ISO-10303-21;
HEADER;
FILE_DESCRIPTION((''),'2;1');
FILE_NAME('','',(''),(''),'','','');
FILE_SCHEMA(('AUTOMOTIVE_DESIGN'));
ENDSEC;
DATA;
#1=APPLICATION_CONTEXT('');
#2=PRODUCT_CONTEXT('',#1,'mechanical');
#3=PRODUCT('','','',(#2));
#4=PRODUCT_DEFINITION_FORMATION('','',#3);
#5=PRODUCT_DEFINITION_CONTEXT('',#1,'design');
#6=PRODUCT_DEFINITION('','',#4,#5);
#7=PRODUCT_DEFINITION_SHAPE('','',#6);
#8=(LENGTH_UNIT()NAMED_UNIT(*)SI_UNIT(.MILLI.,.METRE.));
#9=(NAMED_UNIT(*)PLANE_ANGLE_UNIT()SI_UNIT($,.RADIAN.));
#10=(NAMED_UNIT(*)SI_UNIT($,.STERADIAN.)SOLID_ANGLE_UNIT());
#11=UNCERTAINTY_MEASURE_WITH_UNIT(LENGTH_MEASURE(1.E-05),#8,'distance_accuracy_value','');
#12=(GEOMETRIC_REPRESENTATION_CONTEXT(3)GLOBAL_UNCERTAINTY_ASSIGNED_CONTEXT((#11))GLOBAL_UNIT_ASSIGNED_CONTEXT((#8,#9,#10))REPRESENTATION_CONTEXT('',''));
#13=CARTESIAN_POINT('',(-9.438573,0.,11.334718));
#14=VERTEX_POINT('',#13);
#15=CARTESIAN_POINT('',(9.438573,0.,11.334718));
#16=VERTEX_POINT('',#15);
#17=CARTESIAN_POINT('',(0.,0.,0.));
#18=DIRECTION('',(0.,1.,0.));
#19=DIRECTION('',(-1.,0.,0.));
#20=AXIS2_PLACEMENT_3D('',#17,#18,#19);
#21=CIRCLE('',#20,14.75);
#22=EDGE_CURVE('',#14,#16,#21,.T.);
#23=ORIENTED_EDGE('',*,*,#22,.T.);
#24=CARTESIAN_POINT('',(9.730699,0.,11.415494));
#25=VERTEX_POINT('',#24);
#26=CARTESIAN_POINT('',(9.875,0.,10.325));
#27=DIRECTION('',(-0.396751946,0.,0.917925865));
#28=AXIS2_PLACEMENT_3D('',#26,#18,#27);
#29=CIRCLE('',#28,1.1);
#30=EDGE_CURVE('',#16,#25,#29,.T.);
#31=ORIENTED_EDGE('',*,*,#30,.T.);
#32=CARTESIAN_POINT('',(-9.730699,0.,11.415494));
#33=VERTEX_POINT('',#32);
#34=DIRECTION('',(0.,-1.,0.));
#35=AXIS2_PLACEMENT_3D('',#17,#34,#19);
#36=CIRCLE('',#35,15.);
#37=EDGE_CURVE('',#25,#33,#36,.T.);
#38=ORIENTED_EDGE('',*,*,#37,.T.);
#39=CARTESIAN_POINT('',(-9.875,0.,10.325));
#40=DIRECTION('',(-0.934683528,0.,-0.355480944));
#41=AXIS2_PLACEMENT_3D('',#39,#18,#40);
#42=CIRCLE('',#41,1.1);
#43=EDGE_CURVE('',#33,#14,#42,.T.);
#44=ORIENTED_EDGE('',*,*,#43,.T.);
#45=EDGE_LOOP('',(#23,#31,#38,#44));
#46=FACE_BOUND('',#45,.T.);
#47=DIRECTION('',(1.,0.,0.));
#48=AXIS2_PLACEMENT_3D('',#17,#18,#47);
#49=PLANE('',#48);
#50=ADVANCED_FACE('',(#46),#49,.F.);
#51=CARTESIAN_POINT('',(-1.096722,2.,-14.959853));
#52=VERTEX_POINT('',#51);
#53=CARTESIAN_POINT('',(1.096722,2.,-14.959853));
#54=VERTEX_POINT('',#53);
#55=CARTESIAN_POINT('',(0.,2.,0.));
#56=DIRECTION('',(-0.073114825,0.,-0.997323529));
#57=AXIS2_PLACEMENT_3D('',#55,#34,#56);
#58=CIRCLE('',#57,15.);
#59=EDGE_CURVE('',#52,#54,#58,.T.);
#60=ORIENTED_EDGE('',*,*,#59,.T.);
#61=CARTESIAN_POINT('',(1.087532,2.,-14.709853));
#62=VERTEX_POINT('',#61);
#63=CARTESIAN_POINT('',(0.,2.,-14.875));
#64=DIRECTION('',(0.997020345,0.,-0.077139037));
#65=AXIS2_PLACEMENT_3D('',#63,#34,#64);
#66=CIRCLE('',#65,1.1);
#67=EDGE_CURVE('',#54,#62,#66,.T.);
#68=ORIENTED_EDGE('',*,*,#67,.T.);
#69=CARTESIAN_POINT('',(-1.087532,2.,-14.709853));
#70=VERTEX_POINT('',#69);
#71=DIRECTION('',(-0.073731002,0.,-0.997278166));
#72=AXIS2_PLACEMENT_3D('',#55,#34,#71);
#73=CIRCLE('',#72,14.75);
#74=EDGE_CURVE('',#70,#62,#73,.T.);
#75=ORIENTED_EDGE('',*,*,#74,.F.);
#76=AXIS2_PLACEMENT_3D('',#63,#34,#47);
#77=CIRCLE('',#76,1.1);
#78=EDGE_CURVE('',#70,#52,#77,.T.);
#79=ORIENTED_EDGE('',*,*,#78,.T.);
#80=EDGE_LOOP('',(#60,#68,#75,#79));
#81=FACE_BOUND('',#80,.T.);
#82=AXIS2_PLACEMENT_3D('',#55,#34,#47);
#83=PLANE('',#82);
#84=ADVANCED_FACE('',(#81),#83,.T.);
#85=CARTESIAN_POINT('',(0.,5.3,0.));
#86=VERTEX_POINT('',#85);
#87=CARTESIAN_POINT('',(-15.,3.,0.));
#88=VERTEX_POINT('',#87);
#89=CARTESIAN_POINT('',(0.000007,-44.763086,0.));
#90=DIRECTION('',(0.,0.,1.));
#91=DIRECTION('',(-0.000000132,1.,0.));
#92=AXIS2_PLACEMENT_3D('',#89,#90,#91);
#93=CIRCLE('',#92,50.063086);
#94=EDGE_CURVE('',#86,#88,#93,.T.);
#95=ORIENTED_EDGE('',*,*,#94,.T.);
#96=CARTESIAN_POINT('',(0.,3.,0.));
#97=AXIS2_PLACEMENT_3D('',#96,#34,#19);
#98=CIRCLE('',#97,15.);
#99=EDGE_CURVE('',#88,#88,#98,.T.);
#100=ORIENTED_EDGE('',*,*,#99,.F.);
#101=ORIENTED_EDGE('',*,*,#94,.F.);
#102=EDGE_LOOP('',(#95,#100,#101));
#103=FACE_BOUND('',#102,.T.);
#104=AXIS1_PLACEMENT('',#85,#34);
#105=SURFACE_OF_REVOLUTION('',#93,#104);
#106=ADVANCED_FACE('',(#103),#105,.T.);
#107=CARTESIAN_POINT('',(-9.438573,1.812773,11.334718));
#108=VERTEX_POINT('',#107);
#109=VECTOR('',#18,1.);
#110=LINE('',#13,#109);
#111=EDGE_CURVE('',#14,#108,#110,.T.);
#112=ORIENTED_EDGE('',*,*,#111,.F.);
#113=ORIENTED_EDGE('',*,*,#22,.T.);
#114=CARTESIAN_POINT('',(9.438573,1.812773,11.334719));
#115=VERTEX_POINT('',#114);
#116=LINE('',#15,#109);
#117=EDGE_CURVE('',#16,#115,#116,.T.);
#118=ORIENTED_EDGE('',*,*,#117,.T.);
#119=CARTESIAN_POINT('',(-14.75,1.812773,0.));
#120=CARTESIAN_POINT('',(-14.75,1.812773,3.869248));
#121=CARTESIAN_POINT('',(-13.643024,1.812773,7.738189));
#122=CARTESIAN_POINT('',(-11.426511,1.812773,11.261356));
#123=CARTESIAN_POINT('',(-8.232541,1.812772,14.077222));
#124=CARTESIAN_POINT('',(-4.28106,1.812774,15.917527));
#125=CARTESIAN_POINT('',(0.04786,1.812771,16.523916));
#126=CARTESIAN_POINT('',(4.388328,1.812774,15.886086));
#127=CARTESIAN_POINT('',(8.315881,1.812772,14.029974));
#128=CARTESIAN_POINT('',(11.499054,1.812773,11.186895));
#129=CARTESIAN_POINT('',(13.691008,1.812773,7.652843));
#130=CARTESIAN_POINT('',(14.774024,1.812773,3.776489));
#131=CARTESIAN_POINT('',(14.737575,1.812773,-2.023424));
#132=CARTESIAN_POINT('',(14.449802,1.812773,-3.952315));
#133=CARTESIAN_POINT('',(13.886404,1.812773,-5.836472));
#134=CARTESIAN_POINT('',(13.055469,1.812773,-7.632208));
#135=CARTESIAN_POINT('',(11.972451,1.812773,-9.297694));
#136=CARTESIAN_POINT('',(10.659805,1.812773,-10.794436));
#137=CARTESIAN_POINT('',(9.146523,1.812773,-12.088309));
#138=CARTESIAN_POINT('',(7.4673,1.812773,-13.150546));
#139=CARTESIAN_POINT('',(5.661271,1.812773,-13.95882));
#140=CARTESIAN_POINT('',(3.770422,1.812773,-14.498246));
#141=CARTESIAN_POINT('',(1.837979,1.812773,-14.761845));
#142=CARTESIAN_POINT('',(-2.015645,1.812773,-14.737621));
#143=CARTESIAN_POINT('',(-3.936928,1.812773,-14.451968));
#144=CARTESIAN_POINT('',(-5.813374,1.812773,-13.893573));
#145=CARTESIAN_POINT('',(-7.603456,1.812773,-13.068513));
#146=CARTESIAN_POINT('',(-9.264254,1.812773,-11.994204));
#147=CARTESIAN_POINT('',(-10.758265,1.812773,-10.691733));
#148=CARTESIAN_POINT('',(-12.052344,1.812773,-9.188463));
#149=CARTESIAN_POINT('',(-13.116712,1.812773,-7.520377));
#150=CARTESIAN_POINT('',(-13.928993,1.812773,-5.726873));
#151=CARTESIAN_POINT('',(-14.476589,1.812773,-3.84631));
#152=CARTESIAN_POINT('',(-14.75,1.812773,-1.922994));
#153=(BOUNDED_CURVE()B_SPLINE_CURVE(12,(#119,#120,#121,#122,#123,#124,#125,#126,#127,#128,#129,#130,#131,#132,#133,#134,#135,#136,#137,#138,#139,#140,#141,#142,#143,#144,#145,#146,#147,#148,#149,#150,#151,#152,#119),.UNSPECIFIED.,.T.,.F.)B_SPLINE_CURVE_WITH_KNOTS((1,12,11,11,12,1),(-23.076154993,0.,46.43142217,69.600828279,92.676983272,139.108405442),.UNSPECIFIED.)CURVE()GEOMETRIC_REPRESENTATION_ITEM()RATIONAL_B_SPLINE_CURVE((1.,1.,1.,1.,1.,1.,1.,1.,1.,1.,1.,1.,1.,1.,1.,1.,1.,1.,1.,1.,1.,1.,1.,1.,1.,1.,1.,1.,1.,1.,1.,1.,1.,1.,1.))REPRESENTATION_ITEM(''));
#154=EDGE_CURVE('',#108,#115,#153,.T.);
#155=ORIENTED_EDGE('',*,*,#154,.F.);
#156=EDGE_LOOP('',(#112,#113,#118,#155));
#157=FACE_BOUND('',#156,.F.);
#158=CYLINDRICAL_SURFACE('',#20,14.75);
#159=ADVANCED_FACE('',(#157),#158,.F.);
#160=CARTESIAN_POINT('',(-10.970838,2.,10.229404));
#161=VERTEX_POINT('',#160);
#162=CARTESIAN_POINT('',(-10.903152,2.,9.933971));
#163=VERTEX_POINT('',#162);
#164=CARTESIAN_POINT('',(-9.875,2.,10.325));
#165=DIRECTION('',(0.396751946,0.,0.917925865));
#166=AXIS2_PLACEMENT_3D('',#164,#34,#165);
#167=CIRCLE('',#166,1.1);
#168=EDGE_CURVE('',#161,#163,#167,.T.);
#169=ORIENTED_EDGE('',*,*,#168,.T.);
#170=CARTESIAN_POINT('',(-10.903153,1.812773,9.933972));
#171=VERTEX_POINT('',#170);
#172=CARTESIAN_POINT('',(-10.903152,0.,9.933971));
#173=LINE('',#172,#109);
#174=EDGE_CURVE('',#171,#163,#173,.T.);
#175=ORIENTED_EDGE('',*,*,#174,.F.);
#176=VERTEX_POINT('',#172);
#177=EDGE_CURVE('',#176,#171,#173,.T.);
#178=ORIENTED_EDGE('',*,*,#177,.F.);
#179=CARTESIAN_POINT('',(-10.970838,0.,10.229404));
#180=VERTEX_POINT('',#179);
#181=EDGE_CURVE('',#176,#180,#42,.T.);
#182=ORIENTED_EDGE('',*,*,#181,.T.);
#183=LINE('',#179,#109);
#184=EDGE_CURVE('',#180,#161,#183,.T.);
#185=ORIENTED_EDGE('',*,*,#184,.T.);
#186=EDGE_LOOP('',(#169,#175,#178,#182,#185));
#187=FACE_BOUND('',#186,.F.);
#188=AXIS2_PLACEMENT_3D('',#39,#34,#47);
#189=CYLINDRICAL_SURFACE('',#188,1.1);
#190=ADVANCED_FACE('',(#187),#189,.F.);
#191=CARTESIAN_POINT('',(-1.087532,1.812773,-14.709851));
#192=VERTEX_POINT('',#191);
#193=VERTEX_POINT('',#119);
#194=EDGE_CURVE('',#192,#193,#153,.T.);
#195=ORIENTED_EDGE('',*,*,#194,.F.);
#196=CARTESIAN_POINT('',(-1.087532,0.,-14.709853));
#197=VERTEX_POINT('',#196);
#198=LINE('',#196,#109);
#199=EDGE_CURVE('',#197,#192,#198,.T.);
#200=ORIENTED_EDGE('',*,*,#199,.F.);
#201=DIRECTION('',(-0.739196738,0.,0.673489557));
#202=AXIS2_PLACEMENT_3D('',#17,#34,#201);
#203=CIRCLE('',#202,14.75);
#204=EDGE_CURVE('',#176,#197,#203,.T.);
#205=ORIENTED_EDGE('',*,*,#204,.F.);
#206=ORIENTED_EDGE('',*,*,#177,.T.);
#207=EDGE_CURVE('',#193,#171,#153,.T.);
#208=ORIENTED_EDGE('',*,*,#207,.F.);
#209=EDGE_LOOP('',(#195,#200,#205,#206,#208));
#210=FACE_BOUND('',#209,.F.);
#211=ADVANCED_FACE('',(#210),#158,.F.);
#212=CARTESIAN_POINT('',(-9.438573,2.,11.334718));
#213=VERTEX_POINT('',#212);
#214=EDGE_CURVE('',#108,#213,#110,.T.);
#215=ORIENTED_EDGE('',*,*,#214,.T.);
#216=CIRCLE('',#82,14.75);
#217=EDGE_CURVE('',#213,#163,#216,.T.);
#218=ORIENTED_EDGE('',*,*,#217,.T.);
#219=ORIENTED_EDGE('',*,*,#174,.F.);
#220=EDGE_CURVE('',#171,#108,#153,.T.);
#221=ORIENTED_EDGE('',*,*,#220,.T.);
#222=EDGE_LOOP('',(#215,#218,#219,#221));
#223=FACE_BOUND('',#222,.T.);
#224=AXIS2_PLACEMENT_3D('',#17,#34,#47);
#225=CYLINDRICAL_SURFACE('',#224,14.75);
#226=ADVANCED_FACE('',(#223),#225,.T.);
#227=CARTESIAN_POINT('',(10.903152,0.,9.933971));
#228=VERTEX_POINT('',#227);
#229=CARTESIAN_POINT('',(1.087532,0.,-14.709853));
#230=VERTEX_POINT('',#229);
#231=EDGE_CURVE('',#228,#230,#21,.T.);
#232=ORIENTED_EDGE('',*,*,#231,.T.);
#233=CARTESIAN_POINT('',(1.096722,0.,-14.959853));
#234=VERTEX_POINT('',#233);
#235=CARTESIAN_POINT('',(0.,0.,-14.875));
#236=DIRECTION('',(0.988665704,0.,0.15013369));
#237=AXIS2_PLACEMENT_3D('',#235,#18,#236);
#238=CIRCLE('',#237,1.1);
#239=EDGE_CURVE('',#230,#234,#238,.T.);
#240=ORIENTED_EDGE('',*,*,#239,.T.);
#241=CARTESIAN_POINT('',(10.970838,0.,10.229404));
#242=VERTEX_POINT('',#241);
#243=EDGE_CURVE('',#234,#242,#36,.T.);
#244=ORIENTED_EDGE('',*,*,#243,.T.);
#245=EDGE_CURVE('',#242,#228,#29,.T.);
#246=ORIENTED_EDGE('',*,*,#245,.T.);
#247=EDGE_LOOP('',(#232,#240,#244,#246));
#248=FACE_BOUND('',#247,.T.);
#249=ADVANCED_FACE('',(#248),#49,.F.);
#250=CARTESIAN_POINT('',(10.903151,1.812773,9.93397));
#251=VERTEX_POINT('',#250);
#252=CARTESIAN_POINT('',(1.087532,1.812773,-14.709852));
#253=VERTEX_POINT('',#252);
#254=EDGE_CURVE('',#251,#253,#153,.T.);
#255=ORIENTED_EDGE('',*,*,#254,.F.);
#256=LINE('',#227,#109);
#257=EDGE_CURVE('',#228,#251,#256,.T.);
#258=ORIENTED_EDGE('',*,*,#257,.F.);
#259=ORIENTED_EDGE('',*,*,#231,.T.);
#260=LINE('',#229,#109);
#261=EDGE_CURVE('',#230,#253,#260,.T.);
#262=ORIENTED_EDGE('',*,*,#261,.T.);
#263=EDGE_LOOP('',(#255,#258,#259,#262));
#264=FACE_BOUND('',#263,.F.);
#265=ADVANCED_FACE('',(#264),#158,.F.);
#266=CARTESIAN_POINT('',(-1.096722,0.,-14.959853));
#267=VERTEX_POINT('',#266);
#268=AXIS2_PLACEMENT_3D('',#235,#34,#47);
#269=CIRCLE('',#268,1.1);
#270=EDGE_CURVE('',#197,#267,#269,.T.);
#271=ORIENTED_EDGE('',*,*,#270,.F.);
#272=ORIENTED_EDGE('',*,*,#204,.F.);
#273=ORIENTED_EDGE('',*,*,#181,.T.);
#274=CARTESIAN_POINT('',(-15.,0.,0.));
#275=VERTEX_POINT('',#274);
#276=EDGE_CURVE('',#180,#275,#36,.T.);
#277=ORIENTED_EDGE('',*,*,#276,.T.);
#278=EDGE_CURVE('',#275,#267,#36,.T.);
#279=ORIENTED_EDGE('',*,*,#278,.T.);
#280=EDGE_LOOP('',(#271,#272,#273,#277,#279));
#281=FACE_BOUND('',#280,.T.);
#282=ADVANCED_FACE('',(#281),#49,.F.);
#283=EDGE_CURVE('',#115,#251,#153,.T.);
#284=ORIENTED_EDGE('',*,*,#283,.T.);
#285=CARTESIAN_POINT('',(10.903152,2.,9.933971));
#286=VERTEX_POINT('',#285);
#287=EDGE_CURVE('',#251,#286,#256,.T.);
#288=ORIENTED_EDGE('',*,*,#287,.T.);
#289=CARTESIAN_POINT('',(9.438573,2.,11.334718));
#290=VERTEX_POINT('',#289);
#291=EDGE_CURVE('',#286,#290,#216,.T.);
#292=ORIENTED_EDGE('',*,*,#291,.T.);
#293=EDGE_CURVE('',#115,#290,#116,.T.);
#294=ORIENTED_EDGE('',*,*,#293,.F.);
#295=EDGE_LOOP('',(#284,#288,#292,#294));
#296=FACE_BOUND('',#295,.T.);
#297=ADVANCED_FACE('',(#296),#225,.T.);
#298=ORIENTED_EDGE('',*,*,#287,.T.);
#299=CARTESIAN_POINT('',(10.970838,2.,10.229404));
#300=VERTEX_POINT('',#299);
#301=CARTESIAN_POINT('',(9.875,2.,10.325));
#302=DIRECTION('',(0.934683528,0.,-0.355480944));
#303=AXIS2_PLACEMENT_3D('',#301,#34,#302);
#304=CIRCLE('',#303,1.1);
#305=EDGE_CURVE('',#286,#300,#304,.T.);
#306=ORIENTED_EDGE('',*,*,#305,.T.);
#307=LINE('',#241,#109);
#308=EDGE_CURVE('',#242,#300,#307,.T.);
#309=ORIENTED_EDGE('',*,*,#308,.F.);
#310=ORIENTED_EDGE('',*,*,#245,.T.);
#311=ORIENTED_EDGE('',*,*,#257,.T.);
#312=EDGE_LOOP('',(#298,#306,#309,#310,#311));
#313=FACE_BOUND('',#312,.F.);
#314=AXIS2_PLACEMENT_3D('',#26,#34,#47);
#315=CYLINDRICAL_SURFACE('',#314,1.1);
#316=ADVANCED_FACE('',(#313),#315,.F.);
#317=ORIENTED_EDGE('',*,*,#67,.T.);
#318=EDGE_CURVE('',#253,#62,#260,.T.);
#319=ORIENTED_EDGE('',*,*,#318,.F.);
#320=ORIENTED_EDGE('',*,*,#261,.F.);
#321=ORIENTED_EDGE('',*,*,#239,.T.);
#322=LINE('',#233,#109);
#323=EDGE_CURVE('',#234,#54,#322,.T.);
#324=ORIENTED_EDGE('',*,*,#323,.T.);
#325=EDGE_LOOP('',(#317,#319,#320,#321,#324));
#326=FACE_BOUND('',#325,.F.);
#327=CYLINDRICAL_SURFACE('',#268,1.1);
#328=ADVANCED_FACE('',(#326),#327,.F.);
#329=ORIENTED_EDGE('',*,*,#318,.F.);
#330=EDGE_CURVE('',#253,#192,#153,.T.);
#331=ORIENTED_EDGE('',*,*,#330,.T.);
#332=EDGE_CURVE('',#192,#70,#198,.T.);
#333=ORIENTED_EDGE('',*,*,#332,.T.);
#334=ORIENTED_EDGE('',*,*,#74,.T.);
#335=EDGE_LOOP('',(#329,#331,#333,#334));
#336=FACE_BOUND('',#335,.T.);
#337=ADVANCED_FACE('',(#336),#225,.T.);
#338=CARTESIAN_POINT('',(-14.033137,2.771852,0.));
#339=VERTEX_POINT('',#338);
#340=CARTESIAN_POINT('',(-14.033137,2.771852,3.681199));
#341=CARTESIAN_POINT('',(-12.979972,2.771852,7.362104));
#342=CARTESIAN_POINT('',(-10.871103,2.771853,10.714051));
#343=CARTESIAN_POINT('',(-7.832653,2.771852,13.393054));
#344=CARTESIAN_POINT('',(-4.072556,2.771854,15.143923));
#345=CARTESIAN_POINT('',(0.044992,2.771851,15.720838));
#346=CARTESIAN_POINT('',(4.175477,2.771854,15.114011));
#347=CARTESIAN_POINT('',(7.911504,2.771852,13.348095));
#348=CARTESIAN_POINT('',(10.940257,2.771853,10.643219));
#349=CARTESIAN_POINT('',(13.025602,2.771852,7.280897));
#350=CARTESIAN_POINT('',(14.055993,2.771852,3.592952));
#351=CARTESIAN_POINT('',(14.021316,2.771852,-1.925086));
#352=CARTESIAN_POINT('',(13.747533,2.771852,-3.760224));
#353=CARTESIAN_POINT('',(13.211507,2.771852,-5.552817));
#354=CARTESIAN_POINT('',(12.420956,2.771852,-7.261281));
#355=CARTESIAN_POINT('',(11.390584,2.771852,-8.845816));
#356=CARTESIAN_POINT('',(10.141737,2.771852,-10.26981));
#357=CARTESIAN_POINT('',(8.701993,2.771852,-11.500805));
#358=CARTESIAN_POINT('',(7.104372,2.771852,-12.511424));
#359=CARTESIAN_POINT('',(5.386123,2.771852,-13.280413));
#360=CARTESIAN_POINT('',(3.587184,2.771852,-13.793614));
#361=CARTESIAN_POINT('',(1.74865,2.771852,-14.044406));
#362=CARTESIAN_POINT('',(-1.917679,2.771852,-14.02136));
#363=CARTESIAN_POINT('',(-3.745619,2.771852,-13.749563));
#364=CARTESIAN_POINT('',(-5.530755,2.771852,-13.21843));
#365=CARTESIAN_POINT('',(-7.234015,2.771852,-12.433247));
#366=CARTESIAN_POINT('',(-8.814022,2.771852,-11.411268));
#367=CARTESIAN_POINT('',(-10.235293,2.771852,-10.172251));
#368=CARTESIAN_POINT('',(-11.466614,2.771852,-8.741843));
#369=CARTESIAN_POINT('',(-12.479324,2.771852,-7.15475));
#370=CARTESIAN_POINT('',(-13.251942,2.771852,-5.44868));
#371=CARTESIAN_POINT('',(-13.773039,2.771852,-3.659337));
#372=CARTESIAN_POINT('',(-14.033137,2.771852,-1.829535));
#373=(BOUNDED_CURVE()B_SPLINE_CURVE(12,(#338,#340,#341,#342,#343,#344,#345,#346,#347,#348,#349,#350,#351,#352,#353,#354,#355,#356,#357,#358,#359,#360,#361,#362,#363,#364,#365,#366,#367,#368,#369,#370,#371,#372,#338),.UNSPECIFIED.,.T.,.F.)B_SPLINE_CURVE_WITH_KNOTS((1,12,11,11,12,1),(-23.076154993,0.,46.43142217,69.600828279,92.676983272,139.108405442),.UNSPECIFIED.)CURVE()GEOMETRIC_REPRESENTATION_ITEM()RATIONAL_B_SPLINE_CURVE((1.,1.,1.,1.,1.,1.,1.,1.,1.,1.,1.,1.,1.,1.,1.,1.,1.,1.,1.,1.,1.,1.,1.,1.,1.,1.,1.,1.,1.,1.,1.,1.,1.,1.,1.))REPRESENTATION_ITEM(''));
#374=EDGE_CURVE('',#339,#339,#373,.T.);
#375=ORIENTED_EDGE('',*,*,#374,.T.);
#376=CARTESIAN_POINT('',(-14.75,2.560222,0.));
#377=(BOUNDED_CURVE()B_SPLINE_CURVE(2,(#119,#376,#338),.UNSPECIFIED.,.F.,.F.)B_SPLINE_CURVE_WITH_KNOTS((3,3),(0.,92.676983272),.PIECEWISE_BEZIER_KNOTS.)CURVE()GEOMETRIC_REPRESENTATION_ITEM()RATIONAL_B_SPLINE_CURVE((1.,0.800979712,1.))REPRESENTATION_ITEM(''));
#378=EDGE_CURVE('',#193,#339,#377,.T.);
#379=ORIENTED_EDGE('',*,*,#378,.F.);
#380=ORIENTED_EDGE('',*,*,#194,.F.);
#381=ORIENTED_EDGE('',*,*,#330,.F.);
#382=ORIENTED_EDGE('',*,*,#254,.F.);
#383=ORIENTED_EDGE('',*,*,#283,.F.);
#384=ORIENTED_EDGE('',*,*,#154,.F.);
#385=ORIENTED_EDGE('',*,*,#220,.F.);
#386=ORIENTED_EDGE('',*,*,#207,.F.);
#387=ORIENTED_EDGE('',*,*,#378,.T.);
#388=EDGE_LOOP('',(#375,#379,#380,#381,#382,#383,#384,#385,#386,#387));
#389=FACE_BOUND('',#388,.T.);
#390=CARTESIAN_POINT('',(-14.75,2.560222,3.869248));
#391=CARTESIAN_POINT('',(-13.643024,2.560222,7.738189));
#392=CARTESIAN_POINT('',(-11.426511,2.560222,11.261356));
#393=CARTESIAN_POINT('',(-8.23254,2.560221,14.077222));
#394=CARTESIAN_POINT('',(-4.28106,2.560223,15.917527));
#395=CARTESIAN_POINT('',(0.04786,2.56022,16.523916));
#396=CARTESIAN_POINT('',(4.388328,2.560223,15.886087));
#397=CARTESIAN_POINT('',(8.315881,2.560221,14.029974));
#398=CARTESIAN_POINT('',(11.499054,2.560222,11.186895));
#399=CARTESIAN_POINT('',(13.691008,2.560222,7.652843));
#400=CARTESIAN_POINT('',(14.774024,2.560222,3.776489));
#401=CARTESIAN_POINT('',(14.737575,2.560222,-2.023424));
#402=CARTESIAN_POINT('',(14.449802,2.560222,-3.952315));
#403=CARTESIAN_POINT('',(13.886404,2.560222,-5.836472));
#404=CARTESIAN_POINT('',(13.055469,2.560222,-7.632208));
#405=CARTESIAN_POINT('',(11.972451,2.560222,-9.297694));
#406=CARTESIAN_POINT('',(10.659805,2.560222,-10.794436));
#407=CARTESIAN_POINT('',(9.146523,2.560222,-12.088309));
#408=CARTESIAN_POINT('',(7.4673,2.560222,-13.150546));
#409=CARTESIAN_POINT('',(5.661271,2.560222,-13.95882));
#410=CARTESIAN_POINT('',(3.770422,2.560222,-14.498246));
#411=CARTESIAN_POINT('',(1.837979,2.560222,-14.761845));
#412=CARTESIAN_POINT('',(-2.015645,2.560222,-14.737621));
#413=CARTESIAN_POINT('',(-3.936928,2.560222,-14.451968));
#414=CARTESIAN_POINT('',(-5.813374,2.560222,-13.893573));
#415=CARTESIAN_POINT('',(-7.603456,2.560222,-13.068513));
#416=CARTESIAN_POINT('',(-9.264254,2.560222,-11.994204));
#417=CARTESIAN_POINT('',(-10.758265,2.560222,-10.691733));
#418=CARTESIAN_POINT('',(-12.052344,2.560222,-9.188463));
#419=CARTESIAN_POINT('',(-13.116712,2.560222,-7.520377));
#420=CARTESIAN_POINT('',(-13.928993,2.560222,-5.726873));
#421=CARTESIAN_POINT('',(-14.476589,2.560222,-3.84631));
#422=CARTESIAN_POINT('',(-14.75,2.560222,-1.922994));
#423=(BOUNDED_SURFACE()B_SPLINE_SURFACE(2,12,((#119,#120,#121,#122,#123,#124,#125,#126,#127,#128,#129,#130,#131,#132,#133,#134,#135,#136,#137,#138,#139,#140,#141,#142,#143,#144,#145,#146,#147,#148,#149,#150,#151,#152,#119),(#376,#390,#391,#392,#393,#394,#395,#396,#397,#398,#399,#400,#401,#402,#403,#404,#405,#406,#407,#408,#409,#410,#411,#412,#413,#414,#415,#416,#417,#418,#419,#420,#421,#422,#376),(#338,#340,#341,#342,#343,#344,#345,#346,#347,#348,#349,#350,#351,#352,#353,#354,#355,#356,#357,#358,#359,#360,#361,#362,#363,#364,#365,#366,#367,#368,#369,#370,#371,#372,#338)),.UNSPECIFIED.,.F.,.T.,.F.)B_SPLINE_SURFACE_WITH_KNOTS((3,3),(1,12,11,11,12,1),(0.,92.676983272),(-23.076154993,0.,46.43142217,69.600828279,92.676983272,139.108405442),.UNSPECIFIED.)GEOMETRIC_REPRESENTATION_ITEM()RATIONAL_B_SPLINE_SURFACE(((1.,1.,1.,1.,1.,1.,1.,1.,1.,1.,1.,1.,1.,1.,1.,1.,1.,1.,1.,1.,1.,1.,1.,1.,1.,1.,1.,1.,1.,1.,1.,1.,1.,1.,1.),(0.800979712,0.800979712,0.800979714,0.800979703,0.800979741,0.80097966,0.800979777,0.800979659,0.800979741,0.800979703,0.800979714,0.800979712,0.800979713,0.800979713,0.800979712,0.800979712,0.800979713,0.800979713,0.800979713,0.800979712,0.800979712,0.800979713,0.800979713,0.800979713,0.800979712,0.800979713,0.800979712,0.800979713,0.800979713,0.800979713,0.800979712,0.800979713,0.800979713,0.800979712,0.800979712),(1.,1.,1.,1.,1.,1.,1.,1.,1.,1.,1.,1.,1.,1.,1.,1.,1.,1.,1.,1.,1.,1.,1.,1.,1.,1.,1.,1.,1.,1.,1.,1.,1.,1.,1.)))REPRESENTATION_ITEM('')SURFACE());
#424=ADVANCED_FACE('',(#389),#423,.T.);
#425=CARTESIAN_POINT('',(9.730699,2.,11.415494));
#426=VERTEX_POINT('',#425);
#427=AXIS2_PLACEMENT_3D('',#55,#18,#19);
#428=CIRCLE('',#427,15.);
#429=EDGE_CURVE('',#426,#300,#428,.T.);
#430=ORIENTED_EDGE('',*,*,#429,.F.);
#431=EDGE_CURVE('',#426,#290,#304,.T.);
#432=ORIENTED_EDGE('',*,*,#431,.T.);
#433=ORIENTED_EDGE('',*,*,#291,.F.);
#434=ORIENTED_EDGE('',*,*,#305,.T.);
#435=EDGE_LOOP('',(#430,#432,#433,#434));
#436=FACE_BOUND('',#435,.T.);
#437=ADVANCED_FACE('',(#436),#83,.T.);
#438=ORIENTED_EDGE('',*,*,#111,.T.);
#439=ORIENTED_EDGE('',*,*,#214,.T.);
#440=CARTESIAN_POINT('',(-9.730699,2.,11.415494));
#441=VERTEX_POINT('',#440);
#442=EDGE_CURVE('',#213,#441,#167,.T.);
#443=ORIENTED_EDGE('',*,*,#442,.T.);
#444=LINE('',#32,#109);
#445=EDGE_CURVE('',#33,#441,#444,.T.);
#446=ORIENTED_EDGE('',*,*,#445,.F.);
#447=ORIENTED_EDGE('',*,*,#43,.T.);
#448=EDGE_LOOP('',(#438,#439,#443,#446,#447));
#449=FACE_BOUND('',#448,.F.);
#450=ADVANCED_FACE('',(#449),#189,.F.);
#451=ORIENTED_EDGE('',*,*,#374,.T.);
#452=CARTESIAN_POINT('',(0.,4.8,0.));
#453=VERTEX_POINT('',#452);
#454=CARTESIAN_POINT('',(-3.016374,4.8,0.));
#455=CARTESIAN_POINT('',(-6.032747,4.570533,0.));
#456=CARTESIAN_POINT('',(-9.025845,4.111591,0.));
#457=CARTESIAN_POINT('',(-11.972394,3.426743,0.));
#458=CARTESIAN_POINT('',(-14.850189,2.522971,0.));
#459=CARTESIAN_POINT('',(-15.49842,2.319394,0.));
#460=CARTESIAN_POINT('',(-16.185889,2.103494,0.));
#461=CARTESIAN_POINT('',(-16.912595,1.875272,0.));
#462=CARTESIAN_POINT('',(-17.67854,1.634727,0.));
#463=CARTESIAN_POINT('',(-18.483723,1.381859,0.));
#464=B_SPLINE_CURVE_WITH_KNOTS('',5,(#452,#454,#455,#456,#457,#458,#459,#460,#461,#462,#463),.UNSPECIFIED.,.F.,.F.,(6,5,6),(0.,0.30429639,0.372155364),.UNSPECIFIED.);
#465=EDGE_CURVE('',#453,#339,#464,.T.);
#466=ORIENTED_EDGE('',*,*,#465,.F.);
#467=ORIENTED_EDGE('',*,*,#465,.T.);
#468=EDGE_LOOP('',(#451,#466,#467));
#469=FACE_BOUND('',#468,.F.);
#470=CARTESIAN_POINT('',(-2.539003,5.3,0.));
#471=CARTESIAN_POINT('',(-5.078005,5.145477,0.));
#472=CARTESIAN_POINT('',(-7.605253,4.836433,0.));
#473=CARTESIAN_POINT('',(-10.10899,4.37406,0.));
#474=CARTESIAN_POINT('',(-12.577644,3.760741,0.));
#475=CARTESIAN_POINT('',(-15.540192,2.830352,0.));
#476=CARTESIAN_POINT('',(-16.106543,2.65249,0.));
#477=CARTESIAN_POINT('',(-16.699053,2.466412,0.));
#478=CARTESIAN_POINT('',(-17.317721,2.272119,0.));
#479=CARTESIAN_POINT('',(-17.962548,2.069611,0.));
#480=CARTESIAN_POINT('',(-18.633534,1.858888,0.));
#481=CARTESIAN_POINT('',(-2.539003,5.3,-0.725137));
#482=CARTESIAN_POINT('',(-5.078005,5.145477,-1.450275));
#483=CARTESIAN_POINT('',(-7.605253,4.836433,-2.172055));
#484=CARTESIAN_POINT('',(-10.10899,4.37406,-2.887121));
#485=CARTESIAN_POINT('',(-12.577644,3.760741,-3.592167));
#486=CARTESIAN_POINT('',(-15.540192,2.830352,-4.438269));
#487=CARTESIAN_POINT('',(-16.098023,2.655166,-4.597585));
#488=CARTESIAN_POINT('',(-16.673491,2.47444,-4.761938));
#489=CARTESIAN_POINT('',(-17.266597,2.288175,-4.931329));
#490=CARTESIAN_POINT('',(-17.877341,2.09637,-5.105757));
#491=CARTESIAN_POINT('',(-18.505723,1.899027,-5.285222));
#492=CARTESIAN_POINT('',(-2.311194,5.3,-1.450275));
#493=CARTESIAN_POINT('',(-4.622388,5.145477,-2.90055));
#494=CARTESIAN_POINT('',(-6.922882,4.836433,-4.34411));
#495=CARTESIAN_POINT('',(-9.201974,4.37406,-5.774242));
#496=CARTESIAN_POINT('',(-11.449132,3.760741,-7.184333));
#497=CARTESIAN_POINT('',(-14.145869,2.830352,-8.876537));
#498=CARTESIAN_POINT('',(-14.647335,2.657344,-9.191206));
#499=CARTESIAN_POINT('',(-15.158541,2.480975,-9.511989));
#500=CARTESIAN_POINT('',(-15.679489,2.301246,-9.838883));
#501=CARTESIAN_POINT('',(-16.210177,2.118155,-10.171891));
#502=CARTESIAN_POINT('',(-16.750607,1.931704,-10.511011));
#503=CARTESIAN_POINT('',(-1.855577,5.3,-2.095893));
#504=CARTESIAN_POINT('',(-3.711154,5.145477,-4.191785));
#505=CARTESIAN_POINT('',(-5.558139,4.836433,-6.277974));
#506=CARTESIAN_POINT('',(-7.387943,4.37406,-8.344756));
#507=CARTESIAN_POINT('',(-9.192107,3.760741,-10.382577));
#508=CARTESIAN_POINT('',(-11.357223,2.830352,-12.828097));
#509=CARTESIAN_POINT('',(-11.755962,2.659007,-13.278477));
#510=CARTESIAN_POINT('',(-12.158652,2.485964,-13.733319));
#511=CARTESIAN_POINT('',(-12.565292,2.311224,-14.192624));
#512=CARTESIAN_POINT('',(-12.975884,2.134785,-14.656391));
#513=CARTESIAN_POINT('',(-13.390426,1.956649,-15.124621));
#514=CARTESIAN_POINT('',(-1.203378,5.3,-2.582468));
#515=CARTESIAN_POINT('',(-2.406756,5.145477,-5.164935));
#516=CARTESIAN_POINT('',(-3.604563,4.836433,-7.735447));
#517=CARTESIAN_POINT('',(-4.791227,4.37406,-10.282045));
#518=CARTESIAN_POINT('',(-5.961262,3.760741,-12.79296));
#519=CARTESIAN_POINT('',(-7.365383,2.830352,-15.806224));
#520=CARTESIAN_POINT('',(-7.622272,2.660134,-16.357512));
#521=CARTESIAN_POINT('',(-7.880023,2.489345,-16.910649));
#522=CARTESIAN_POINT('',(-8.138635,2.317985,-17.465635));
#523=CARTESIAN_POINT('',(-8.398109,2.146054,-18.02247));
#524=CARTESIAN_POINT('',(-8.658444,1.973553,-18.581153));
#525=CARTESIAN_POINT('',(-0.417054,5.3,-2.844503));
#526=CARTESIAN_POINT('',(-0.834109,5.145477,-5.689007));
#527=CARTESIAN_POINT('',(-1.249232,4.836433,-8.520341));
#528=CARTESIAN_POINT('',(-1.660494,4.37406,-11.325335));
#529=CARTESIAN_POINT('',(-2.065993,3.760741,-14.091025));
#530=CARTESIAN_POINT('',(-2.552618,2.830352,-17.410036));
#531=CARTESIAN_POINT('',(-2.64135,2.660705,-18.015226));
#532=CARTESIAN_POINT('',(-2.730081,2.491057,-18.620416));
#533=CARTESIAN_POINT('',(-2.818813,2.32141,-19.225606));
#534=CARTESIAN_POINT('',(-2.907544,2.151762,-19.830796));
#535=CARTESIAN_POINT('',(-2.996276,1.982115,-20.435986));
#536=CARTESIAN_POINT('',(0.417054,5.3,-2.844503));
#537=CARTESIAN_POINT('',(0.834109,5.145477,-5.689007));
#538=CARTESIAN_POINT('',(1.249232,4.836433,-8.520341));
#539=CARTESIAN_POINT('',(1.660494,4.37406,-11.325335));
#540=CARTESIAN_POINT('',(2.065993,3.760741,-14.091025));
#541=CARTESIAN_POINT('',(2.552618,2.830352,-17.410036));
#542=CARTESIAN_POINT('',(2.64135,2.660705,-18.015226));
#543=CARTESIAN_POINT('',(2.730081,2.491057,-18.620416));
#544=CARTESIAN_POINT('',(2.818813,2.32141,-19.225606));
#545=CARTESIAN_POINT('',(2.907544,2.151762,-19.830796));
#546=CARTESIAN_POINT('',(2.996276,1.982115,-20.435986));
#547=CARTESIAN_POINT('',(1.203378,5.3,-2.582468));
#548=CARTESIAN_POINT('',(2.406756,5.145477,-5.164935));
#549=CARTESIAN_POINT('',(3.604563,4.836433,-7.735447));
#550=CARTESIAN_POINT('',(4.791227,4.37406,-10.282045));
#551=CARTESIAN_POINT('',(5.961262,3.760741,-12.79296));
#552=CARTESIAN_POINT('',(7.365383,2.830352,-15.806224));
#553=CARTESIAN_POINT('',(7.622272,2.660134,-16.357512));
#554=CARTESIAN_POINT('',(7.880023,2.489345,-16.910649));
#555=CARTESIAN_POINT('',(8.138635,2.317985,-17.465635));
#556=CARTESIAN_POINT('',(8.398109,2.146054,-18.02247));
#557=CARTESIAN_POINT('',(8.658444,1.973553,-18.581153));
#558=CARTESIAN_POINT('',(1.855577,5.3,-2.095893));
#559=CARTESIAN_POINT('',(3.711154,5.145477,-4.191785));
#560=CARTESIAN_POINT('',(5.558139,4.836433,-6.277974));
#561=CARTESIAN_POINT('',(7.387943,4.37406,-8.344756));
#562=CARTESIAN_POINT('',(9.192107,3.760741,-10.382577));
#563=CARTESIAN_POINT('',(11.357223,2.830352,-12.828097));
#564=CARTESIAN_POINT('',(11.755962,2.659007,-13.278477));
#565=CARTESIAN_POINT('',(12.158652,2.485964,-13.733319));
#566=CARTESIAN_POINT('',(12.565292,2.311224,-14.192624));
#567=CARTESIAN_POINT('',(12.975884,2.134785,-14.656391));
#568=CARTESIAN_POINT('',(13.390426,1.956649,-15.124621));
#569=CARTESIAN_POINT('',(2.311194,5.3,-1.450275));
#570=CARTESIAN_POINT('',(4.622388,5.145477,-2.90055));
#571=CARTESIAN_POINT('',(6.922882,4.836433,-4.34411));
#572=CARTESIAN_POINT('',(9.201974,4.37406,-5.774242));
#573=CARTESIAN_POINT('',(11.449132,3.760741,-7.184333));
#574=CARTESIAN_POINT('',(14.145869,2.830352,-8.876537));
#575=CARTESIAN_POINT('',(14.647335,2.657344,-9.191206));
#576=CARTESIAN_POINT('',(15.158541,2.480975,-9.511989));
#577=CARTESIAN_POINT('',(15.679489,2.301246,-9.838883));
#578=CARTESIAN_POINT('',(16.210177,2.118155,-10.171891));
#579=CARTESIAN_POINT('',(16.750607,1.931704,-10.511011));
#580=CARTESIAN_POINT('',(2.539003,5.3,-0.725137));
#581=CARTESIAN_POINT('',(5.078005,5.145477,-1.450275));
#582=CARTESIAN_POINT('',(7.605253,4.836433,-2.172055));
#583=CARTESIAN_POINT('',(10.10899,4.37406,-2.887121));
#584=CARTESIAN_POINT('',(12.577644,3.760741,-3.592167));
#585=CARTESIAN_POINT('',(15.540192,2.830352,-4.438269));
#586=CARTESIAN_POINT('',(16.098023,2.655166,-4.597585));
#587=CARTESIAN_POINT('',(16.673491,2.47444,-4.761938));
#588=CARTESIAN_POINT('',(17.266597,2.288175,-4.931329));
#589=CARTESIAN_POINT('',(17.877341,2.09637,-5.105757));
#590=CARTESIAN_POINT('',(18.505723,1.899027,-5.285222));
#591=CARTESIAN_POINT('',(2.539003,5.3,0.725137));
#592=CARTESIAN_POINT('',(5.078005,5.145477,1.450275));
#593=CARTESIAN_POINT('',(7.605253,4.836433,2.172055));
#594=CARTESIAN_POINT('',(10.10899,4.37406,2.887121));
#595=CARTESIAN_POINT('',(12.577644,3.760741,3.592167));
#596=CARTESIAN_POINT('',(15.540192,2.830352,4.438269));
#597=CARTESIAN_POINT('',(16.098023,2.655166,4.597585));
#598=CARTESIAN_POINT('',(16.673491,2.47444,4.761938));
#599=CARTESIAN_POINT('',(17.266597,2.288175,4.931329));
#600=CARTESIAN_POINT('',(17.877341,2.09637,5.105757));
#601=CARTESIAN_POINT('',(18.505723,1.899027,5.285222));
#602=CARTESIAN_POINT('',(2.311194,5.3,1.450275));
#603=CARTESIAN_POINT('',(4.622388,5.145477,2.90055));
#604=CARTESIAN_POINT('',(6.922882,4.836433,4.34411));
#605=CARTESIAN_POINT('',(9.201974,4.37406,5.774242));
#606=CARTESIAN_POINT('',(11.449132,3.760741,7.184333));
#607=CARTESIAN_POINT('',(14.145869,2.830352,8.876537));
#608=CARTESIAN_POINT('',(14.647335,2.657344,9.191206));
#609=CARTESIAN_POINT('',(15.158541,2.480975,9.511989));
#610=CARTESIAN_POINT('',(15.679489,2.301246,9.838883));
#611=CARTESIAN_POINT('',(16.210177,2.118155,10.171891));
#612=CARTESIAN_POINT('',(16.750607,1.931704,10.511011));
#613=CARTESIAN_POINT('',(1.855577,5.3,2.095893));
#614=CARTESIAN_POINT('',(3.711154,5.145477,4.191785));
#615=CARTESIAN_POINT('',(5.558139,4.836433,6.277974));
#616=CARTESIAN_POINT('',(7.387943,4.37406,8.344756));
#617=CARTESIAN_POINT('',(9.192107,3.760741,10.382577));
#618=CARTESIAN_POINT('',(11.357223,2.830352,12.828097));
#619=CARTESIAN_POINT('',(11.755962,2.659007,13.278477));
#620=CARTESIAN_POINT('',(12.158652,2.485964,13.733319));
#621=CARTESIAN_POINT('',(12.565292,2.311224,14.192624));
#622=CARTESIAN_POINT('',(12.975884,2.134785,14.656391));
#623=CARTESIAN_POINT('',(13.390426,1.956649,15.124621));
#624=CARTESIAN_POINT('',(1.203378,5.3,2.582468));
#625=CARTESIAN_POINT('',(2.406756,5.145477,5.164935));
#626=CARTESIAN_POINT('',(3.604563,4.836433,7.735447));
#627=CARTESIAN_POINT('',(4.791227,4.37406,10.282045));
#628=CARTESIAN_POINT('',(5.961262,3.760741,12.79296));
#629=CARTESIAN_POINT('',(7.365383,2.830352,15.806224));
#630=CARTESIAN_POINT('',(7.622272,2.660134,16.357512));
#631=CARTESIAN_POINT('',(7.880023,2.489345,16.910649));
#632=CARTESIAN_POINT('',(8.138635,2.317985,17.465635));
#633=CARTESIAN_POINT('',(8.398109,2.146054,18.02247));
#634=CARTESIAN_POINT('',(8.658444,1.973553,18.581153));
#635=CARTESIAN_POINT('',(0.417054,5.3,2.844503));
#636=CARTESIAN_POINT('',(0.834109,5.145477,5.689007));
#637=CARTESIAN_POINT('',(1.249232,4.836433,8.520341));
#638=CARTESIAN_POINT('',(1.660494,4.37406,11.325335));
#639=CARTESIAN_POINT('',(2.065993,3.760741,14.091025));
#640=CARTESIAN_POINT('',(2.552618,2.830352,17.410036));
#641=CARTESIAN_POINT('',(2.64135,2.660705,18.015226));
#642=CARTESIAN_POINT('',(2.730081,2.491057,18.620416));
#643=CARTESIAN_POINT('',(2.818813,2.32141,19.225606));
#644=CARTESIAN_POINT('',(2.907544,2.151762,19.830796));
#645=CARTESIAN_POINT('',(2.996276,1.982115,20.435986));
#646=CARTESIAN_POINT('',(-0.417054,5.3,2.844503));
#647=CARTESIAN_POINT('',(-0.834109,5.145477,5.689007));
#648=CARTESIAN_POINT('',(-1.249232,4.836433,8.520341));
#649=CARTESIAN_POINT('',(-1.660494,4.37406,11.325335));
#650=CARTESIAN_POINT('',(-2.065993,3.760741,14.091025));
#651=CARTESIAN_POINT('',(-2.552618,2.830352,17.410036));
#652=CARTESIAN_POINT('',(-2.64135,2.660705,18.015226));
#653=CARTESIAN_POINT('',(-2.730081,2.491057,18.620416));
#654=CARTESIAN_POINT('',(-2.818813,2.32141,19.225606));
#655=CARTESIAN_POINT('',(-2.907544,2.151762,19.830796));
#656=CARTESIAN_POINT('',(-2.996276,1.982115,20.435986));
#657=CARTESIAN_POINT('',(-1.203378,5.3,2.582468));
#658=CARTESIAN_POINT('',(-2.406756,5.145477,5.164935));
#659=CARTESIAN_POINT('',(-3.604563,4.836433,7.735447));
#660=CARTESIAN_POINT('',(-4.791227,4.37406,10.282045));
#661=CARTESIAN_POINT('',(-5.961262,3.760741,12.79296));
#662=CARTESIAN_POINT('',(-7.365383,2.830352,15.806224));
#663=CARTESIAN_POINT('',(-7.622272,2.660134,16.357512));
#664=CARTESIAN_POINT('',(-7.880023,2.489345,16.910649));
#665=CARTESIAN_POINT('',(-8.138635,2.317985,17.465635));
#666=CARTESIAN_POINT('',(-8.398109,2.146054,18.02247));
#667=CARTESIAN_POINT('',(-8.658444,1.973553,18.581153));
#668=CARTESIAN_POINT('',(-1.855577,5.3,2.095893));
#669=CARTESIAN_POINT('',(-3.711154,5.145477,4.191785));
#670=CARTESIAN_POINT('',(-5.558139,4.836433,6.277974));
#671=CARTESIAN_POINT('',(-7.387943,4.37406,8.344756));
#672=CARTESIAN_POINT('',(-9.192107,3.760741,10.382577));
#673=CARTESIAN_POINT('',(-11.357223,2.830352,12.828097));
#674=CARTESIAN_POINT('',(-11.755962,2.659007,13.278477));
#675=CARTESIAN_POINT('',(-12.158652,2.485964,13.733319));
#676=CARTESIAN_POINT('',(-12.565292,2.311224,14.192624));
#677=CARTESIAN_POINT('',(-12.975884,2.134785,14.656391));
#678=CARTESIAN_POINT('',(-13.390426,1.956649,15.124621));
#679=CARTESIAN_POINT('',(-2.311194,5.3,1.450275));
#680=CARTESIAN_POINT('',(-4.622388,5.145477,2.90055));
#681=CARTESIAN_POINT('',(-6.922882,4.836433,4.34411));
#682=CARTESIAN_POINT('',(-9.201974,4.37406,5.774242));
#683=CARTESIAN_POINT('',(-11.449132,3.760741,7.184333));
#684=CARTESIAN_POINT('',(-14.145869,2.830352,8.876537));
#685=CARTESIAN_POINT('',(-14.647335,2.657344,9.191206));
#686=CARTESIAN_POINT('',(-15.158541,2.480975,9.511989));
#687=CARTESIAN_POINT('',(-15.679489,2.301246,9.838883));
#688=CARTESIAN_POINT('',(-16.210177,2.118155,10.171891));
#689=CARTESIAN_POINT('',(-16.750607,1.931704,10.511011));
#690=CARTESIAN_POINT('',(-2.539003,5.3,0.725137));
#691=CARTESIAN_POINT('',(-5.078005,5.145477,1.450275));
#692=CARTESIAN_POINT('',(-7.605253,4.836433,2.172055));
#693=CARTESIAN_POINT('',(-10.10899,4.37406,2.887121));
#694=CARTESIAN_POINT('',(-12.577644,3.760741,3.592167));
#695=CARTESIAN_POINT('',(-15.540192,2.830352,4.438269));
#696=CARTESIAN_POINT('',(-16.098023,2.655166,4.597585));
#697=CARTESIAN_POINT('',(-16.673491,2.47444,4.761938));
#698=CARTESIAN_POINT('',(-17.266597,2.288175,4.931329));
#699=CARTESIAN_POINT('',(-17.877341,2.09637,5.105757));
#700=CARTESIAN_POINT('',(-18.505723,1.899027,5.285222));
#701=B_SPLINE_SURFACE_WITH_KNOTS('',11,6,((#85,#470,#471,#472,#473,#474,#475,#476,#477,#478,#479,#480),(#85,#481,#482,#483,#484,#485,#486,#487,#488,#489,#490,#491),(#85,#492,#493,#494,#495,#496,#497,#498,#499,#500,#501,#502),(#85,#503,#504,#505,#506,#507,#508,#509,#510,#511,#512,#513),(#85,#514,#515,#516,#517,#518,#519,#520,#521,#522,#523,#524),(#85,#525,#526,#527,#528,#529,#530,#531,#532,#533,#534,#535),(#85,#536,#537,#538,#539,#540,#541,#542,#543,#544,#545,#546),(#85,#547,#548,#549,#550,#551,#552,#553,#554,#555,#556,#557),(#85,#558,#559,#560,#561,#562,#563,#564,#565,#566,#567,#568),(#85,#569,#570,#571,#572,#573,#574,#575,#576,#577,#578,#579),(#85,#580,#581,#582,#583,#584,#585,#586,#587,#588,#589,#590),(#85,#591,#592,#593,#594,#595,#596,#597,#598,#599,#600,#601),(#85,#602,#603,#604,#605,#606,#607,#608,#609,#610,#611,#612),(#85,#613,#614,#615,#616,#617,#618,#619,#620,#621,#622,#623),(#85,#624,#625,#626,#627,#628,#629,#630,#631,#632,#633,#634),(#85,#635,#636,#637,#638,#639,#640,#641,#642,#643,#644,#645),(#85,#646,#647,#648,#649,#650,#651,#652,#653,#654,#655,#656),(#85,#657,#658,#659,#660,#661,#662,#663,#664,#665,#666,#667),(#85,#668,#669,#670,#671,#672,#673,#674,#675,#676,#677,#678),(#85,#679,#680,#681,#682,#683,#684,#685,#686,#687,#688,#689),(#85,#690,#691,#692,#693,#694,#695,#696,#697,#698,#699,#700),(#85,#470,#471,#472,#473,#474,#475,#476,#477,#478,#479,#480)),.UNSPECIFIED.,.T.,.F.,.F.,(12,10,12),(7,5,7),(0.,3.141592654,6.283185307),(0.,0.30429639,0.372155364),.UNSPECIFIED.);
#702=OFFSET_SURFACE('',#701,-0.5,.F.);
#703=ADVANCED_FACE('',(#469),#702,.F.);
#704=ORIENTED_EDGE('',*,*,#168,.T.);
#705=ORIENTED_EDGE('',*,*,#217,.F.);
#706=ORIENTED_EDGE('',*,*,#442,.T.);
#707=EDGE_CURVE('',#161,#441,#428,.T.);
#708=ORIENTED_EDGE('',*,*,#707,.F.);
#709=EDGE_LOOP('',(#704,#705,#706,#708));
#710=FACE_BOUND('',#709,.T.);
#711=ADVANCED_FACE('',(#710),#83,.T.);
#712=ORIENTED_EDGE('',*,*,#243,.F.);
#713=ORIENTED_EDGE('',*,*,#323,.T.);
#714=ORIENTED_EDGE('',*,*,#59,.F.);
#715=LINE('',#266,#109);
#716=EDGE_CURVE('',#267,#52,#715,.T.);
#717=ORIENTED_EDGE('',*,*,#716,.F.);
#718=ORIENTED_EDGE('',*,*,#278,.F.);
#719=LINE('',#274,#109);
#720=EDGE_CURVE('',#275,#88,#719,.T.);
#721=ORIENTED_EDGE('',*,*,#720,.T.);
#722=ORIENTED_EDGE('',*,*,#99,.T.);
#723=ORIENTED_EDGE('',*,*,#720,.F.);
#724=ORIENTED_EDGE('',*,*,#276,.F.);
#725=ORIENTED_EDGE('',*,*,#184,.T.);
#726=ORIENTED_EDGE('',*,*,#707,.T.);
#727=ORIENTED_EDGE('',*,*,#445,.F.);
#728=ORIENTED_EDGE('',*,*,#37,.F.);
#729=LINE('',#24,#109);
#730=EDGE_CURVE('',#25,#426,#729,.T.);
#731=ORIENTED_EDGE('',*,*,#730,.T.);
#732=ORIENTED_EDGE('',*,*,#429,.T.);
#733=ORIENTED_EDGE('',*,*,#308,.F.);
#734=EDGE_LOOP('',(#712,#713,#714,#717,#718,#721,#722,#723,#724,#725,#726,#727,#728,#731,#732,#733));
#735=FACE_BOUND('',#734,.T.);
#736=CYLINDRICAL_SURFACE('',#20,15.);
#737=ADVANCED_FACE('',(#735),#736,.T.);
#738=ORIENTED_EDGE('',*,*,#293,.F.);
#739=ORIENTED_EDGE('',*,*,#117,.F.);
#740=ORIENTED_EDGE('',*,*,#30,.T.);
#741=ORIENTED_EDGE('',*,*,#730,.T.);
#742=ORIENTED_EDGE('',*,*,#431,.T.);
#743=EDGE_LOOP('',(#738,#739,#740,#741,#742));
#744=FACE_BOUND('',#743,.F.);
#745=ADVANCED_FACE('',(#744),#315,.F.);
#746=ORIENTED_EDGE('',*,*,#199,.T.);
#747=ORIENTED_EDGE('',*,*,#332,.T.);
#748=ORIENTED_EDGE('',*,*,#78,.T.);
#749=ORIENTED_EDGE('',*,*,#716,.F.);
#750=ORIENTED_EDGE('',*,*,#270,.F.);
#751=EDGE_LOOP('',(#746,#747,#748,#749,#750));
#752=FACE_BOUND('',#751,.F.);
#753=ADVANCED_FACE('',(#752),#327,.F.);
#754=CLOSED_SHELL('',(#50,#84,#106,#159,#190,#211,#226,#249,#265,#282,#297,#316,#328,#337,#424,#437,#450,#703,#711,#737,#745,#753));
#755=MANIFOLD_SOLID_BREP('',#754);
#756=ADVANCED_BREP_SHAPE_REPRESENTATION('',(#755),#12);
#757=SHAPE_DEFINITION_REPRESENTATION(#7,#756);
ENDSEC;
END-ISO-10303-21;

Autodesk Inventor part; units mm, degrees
ref_plane "YZ Plane" through (0, 0, 0) normal (1, 0, 0) x (0, 1, 0)
ref_plane "XZ Plane" through (0, 0, 0) normal (0, 1, 0) x (-1, 0, 0)
ref_plane "XY Plane" through (0, 0, 0) normal (0, 0, 1) x (1, 0, 0)
sketch "Эскиз1" plane through (0, 0, 0) normal (0, 0, 1) x (1, 0, 0)
  line L0 (-15, 0) -> (-15, 3)
  line L1 (-15, 0) -> (0, 0)
  line L2 (0, 2.3791) -> (0, 0.5542) construction
  arc A0 (0, 5.3) -> (-15, 3) centre (0, -44.763) ccw
  line L3 (0, 0) -> (0, 5.3) construction
  line L4 (0, 5.3) -> (0, 0)
  dimension "d0" = 3
  dimension "d1" = 15
  dimension "d6" = 5.3
revolve "Вращение1" add sketch "Эскиз1" angle 360 about axis through (0, 5.3, 0) along (0, -1, 0)
shell "Оболочка1" thickness 0.5 removed faces 1 at (-4.7094, 0, 0) ; own thickness 0.25 on faces at (-14.9514, 2, 1.207)
fillet "Сопряжение1" radius 1 1 edges at (14.75, 2.5543, 0.0003)
sketch "Эскиз2" plane through (0, 0, 0) normal (0, -1, 0) x (1, 0, 0)
  circle A0 centre (9.875, 10.325) radius 1.1
  circle A1 centre (-9.875, 10.325) radius 1.1
  line L0 (9.875, 10.325) -> (-9.875, 10.325) construction
  line L1 (0, 10.325) -> (0, -14.875) construction
  line L2 (0, -14.875) -> (-9.875, 10.325) construction
  line L3 (0, -14.875) -> (9.875, 10.325) construction
  circle A2 centre (0, -14.875) radius 1.1
  circle A3 centre (0, 0) radius 15 projected
  line L4 (0, -15) -> (0, -14.75)
  circle A4 centre (0, 0) radius 14.75 projected
  point P0 (0, -2.275)
  point P1 (0, -2.275)
  point P2 (-9.4386, 11.3347)
  point P3 (-10.9032, 9.934)
  point P4 (10.9032, 9.934)
  point P5 (9.4386, 11.3347)
  point P6 (-10.9708, 10.2294)
  point P7 (-9.7307, 11.4155)
  point P8 (9.7307, 11.4155)
  point P9 (10.9708, 10.2294)
  point P10 (1.0875, -14.7099)
  point P11 (-1.0875, -14.7099)
  point P12 (-1.0967, -14.9599)
  point P13 (1.0967, -14.9599)
  dimension "d11" = 2.2
  dimension "d12" = 19.75
  dimension "d15" = 25.2
extrude "Выдавливание1" cut sketch "Эскиз2" against normal blind 2 contours A0 A3 | A3 A0 A4 | A3 A1 | A1 A4 A3 | A3 L4 A4 A2 | A2 A4 L4 A3
properties part number "зрачок"
